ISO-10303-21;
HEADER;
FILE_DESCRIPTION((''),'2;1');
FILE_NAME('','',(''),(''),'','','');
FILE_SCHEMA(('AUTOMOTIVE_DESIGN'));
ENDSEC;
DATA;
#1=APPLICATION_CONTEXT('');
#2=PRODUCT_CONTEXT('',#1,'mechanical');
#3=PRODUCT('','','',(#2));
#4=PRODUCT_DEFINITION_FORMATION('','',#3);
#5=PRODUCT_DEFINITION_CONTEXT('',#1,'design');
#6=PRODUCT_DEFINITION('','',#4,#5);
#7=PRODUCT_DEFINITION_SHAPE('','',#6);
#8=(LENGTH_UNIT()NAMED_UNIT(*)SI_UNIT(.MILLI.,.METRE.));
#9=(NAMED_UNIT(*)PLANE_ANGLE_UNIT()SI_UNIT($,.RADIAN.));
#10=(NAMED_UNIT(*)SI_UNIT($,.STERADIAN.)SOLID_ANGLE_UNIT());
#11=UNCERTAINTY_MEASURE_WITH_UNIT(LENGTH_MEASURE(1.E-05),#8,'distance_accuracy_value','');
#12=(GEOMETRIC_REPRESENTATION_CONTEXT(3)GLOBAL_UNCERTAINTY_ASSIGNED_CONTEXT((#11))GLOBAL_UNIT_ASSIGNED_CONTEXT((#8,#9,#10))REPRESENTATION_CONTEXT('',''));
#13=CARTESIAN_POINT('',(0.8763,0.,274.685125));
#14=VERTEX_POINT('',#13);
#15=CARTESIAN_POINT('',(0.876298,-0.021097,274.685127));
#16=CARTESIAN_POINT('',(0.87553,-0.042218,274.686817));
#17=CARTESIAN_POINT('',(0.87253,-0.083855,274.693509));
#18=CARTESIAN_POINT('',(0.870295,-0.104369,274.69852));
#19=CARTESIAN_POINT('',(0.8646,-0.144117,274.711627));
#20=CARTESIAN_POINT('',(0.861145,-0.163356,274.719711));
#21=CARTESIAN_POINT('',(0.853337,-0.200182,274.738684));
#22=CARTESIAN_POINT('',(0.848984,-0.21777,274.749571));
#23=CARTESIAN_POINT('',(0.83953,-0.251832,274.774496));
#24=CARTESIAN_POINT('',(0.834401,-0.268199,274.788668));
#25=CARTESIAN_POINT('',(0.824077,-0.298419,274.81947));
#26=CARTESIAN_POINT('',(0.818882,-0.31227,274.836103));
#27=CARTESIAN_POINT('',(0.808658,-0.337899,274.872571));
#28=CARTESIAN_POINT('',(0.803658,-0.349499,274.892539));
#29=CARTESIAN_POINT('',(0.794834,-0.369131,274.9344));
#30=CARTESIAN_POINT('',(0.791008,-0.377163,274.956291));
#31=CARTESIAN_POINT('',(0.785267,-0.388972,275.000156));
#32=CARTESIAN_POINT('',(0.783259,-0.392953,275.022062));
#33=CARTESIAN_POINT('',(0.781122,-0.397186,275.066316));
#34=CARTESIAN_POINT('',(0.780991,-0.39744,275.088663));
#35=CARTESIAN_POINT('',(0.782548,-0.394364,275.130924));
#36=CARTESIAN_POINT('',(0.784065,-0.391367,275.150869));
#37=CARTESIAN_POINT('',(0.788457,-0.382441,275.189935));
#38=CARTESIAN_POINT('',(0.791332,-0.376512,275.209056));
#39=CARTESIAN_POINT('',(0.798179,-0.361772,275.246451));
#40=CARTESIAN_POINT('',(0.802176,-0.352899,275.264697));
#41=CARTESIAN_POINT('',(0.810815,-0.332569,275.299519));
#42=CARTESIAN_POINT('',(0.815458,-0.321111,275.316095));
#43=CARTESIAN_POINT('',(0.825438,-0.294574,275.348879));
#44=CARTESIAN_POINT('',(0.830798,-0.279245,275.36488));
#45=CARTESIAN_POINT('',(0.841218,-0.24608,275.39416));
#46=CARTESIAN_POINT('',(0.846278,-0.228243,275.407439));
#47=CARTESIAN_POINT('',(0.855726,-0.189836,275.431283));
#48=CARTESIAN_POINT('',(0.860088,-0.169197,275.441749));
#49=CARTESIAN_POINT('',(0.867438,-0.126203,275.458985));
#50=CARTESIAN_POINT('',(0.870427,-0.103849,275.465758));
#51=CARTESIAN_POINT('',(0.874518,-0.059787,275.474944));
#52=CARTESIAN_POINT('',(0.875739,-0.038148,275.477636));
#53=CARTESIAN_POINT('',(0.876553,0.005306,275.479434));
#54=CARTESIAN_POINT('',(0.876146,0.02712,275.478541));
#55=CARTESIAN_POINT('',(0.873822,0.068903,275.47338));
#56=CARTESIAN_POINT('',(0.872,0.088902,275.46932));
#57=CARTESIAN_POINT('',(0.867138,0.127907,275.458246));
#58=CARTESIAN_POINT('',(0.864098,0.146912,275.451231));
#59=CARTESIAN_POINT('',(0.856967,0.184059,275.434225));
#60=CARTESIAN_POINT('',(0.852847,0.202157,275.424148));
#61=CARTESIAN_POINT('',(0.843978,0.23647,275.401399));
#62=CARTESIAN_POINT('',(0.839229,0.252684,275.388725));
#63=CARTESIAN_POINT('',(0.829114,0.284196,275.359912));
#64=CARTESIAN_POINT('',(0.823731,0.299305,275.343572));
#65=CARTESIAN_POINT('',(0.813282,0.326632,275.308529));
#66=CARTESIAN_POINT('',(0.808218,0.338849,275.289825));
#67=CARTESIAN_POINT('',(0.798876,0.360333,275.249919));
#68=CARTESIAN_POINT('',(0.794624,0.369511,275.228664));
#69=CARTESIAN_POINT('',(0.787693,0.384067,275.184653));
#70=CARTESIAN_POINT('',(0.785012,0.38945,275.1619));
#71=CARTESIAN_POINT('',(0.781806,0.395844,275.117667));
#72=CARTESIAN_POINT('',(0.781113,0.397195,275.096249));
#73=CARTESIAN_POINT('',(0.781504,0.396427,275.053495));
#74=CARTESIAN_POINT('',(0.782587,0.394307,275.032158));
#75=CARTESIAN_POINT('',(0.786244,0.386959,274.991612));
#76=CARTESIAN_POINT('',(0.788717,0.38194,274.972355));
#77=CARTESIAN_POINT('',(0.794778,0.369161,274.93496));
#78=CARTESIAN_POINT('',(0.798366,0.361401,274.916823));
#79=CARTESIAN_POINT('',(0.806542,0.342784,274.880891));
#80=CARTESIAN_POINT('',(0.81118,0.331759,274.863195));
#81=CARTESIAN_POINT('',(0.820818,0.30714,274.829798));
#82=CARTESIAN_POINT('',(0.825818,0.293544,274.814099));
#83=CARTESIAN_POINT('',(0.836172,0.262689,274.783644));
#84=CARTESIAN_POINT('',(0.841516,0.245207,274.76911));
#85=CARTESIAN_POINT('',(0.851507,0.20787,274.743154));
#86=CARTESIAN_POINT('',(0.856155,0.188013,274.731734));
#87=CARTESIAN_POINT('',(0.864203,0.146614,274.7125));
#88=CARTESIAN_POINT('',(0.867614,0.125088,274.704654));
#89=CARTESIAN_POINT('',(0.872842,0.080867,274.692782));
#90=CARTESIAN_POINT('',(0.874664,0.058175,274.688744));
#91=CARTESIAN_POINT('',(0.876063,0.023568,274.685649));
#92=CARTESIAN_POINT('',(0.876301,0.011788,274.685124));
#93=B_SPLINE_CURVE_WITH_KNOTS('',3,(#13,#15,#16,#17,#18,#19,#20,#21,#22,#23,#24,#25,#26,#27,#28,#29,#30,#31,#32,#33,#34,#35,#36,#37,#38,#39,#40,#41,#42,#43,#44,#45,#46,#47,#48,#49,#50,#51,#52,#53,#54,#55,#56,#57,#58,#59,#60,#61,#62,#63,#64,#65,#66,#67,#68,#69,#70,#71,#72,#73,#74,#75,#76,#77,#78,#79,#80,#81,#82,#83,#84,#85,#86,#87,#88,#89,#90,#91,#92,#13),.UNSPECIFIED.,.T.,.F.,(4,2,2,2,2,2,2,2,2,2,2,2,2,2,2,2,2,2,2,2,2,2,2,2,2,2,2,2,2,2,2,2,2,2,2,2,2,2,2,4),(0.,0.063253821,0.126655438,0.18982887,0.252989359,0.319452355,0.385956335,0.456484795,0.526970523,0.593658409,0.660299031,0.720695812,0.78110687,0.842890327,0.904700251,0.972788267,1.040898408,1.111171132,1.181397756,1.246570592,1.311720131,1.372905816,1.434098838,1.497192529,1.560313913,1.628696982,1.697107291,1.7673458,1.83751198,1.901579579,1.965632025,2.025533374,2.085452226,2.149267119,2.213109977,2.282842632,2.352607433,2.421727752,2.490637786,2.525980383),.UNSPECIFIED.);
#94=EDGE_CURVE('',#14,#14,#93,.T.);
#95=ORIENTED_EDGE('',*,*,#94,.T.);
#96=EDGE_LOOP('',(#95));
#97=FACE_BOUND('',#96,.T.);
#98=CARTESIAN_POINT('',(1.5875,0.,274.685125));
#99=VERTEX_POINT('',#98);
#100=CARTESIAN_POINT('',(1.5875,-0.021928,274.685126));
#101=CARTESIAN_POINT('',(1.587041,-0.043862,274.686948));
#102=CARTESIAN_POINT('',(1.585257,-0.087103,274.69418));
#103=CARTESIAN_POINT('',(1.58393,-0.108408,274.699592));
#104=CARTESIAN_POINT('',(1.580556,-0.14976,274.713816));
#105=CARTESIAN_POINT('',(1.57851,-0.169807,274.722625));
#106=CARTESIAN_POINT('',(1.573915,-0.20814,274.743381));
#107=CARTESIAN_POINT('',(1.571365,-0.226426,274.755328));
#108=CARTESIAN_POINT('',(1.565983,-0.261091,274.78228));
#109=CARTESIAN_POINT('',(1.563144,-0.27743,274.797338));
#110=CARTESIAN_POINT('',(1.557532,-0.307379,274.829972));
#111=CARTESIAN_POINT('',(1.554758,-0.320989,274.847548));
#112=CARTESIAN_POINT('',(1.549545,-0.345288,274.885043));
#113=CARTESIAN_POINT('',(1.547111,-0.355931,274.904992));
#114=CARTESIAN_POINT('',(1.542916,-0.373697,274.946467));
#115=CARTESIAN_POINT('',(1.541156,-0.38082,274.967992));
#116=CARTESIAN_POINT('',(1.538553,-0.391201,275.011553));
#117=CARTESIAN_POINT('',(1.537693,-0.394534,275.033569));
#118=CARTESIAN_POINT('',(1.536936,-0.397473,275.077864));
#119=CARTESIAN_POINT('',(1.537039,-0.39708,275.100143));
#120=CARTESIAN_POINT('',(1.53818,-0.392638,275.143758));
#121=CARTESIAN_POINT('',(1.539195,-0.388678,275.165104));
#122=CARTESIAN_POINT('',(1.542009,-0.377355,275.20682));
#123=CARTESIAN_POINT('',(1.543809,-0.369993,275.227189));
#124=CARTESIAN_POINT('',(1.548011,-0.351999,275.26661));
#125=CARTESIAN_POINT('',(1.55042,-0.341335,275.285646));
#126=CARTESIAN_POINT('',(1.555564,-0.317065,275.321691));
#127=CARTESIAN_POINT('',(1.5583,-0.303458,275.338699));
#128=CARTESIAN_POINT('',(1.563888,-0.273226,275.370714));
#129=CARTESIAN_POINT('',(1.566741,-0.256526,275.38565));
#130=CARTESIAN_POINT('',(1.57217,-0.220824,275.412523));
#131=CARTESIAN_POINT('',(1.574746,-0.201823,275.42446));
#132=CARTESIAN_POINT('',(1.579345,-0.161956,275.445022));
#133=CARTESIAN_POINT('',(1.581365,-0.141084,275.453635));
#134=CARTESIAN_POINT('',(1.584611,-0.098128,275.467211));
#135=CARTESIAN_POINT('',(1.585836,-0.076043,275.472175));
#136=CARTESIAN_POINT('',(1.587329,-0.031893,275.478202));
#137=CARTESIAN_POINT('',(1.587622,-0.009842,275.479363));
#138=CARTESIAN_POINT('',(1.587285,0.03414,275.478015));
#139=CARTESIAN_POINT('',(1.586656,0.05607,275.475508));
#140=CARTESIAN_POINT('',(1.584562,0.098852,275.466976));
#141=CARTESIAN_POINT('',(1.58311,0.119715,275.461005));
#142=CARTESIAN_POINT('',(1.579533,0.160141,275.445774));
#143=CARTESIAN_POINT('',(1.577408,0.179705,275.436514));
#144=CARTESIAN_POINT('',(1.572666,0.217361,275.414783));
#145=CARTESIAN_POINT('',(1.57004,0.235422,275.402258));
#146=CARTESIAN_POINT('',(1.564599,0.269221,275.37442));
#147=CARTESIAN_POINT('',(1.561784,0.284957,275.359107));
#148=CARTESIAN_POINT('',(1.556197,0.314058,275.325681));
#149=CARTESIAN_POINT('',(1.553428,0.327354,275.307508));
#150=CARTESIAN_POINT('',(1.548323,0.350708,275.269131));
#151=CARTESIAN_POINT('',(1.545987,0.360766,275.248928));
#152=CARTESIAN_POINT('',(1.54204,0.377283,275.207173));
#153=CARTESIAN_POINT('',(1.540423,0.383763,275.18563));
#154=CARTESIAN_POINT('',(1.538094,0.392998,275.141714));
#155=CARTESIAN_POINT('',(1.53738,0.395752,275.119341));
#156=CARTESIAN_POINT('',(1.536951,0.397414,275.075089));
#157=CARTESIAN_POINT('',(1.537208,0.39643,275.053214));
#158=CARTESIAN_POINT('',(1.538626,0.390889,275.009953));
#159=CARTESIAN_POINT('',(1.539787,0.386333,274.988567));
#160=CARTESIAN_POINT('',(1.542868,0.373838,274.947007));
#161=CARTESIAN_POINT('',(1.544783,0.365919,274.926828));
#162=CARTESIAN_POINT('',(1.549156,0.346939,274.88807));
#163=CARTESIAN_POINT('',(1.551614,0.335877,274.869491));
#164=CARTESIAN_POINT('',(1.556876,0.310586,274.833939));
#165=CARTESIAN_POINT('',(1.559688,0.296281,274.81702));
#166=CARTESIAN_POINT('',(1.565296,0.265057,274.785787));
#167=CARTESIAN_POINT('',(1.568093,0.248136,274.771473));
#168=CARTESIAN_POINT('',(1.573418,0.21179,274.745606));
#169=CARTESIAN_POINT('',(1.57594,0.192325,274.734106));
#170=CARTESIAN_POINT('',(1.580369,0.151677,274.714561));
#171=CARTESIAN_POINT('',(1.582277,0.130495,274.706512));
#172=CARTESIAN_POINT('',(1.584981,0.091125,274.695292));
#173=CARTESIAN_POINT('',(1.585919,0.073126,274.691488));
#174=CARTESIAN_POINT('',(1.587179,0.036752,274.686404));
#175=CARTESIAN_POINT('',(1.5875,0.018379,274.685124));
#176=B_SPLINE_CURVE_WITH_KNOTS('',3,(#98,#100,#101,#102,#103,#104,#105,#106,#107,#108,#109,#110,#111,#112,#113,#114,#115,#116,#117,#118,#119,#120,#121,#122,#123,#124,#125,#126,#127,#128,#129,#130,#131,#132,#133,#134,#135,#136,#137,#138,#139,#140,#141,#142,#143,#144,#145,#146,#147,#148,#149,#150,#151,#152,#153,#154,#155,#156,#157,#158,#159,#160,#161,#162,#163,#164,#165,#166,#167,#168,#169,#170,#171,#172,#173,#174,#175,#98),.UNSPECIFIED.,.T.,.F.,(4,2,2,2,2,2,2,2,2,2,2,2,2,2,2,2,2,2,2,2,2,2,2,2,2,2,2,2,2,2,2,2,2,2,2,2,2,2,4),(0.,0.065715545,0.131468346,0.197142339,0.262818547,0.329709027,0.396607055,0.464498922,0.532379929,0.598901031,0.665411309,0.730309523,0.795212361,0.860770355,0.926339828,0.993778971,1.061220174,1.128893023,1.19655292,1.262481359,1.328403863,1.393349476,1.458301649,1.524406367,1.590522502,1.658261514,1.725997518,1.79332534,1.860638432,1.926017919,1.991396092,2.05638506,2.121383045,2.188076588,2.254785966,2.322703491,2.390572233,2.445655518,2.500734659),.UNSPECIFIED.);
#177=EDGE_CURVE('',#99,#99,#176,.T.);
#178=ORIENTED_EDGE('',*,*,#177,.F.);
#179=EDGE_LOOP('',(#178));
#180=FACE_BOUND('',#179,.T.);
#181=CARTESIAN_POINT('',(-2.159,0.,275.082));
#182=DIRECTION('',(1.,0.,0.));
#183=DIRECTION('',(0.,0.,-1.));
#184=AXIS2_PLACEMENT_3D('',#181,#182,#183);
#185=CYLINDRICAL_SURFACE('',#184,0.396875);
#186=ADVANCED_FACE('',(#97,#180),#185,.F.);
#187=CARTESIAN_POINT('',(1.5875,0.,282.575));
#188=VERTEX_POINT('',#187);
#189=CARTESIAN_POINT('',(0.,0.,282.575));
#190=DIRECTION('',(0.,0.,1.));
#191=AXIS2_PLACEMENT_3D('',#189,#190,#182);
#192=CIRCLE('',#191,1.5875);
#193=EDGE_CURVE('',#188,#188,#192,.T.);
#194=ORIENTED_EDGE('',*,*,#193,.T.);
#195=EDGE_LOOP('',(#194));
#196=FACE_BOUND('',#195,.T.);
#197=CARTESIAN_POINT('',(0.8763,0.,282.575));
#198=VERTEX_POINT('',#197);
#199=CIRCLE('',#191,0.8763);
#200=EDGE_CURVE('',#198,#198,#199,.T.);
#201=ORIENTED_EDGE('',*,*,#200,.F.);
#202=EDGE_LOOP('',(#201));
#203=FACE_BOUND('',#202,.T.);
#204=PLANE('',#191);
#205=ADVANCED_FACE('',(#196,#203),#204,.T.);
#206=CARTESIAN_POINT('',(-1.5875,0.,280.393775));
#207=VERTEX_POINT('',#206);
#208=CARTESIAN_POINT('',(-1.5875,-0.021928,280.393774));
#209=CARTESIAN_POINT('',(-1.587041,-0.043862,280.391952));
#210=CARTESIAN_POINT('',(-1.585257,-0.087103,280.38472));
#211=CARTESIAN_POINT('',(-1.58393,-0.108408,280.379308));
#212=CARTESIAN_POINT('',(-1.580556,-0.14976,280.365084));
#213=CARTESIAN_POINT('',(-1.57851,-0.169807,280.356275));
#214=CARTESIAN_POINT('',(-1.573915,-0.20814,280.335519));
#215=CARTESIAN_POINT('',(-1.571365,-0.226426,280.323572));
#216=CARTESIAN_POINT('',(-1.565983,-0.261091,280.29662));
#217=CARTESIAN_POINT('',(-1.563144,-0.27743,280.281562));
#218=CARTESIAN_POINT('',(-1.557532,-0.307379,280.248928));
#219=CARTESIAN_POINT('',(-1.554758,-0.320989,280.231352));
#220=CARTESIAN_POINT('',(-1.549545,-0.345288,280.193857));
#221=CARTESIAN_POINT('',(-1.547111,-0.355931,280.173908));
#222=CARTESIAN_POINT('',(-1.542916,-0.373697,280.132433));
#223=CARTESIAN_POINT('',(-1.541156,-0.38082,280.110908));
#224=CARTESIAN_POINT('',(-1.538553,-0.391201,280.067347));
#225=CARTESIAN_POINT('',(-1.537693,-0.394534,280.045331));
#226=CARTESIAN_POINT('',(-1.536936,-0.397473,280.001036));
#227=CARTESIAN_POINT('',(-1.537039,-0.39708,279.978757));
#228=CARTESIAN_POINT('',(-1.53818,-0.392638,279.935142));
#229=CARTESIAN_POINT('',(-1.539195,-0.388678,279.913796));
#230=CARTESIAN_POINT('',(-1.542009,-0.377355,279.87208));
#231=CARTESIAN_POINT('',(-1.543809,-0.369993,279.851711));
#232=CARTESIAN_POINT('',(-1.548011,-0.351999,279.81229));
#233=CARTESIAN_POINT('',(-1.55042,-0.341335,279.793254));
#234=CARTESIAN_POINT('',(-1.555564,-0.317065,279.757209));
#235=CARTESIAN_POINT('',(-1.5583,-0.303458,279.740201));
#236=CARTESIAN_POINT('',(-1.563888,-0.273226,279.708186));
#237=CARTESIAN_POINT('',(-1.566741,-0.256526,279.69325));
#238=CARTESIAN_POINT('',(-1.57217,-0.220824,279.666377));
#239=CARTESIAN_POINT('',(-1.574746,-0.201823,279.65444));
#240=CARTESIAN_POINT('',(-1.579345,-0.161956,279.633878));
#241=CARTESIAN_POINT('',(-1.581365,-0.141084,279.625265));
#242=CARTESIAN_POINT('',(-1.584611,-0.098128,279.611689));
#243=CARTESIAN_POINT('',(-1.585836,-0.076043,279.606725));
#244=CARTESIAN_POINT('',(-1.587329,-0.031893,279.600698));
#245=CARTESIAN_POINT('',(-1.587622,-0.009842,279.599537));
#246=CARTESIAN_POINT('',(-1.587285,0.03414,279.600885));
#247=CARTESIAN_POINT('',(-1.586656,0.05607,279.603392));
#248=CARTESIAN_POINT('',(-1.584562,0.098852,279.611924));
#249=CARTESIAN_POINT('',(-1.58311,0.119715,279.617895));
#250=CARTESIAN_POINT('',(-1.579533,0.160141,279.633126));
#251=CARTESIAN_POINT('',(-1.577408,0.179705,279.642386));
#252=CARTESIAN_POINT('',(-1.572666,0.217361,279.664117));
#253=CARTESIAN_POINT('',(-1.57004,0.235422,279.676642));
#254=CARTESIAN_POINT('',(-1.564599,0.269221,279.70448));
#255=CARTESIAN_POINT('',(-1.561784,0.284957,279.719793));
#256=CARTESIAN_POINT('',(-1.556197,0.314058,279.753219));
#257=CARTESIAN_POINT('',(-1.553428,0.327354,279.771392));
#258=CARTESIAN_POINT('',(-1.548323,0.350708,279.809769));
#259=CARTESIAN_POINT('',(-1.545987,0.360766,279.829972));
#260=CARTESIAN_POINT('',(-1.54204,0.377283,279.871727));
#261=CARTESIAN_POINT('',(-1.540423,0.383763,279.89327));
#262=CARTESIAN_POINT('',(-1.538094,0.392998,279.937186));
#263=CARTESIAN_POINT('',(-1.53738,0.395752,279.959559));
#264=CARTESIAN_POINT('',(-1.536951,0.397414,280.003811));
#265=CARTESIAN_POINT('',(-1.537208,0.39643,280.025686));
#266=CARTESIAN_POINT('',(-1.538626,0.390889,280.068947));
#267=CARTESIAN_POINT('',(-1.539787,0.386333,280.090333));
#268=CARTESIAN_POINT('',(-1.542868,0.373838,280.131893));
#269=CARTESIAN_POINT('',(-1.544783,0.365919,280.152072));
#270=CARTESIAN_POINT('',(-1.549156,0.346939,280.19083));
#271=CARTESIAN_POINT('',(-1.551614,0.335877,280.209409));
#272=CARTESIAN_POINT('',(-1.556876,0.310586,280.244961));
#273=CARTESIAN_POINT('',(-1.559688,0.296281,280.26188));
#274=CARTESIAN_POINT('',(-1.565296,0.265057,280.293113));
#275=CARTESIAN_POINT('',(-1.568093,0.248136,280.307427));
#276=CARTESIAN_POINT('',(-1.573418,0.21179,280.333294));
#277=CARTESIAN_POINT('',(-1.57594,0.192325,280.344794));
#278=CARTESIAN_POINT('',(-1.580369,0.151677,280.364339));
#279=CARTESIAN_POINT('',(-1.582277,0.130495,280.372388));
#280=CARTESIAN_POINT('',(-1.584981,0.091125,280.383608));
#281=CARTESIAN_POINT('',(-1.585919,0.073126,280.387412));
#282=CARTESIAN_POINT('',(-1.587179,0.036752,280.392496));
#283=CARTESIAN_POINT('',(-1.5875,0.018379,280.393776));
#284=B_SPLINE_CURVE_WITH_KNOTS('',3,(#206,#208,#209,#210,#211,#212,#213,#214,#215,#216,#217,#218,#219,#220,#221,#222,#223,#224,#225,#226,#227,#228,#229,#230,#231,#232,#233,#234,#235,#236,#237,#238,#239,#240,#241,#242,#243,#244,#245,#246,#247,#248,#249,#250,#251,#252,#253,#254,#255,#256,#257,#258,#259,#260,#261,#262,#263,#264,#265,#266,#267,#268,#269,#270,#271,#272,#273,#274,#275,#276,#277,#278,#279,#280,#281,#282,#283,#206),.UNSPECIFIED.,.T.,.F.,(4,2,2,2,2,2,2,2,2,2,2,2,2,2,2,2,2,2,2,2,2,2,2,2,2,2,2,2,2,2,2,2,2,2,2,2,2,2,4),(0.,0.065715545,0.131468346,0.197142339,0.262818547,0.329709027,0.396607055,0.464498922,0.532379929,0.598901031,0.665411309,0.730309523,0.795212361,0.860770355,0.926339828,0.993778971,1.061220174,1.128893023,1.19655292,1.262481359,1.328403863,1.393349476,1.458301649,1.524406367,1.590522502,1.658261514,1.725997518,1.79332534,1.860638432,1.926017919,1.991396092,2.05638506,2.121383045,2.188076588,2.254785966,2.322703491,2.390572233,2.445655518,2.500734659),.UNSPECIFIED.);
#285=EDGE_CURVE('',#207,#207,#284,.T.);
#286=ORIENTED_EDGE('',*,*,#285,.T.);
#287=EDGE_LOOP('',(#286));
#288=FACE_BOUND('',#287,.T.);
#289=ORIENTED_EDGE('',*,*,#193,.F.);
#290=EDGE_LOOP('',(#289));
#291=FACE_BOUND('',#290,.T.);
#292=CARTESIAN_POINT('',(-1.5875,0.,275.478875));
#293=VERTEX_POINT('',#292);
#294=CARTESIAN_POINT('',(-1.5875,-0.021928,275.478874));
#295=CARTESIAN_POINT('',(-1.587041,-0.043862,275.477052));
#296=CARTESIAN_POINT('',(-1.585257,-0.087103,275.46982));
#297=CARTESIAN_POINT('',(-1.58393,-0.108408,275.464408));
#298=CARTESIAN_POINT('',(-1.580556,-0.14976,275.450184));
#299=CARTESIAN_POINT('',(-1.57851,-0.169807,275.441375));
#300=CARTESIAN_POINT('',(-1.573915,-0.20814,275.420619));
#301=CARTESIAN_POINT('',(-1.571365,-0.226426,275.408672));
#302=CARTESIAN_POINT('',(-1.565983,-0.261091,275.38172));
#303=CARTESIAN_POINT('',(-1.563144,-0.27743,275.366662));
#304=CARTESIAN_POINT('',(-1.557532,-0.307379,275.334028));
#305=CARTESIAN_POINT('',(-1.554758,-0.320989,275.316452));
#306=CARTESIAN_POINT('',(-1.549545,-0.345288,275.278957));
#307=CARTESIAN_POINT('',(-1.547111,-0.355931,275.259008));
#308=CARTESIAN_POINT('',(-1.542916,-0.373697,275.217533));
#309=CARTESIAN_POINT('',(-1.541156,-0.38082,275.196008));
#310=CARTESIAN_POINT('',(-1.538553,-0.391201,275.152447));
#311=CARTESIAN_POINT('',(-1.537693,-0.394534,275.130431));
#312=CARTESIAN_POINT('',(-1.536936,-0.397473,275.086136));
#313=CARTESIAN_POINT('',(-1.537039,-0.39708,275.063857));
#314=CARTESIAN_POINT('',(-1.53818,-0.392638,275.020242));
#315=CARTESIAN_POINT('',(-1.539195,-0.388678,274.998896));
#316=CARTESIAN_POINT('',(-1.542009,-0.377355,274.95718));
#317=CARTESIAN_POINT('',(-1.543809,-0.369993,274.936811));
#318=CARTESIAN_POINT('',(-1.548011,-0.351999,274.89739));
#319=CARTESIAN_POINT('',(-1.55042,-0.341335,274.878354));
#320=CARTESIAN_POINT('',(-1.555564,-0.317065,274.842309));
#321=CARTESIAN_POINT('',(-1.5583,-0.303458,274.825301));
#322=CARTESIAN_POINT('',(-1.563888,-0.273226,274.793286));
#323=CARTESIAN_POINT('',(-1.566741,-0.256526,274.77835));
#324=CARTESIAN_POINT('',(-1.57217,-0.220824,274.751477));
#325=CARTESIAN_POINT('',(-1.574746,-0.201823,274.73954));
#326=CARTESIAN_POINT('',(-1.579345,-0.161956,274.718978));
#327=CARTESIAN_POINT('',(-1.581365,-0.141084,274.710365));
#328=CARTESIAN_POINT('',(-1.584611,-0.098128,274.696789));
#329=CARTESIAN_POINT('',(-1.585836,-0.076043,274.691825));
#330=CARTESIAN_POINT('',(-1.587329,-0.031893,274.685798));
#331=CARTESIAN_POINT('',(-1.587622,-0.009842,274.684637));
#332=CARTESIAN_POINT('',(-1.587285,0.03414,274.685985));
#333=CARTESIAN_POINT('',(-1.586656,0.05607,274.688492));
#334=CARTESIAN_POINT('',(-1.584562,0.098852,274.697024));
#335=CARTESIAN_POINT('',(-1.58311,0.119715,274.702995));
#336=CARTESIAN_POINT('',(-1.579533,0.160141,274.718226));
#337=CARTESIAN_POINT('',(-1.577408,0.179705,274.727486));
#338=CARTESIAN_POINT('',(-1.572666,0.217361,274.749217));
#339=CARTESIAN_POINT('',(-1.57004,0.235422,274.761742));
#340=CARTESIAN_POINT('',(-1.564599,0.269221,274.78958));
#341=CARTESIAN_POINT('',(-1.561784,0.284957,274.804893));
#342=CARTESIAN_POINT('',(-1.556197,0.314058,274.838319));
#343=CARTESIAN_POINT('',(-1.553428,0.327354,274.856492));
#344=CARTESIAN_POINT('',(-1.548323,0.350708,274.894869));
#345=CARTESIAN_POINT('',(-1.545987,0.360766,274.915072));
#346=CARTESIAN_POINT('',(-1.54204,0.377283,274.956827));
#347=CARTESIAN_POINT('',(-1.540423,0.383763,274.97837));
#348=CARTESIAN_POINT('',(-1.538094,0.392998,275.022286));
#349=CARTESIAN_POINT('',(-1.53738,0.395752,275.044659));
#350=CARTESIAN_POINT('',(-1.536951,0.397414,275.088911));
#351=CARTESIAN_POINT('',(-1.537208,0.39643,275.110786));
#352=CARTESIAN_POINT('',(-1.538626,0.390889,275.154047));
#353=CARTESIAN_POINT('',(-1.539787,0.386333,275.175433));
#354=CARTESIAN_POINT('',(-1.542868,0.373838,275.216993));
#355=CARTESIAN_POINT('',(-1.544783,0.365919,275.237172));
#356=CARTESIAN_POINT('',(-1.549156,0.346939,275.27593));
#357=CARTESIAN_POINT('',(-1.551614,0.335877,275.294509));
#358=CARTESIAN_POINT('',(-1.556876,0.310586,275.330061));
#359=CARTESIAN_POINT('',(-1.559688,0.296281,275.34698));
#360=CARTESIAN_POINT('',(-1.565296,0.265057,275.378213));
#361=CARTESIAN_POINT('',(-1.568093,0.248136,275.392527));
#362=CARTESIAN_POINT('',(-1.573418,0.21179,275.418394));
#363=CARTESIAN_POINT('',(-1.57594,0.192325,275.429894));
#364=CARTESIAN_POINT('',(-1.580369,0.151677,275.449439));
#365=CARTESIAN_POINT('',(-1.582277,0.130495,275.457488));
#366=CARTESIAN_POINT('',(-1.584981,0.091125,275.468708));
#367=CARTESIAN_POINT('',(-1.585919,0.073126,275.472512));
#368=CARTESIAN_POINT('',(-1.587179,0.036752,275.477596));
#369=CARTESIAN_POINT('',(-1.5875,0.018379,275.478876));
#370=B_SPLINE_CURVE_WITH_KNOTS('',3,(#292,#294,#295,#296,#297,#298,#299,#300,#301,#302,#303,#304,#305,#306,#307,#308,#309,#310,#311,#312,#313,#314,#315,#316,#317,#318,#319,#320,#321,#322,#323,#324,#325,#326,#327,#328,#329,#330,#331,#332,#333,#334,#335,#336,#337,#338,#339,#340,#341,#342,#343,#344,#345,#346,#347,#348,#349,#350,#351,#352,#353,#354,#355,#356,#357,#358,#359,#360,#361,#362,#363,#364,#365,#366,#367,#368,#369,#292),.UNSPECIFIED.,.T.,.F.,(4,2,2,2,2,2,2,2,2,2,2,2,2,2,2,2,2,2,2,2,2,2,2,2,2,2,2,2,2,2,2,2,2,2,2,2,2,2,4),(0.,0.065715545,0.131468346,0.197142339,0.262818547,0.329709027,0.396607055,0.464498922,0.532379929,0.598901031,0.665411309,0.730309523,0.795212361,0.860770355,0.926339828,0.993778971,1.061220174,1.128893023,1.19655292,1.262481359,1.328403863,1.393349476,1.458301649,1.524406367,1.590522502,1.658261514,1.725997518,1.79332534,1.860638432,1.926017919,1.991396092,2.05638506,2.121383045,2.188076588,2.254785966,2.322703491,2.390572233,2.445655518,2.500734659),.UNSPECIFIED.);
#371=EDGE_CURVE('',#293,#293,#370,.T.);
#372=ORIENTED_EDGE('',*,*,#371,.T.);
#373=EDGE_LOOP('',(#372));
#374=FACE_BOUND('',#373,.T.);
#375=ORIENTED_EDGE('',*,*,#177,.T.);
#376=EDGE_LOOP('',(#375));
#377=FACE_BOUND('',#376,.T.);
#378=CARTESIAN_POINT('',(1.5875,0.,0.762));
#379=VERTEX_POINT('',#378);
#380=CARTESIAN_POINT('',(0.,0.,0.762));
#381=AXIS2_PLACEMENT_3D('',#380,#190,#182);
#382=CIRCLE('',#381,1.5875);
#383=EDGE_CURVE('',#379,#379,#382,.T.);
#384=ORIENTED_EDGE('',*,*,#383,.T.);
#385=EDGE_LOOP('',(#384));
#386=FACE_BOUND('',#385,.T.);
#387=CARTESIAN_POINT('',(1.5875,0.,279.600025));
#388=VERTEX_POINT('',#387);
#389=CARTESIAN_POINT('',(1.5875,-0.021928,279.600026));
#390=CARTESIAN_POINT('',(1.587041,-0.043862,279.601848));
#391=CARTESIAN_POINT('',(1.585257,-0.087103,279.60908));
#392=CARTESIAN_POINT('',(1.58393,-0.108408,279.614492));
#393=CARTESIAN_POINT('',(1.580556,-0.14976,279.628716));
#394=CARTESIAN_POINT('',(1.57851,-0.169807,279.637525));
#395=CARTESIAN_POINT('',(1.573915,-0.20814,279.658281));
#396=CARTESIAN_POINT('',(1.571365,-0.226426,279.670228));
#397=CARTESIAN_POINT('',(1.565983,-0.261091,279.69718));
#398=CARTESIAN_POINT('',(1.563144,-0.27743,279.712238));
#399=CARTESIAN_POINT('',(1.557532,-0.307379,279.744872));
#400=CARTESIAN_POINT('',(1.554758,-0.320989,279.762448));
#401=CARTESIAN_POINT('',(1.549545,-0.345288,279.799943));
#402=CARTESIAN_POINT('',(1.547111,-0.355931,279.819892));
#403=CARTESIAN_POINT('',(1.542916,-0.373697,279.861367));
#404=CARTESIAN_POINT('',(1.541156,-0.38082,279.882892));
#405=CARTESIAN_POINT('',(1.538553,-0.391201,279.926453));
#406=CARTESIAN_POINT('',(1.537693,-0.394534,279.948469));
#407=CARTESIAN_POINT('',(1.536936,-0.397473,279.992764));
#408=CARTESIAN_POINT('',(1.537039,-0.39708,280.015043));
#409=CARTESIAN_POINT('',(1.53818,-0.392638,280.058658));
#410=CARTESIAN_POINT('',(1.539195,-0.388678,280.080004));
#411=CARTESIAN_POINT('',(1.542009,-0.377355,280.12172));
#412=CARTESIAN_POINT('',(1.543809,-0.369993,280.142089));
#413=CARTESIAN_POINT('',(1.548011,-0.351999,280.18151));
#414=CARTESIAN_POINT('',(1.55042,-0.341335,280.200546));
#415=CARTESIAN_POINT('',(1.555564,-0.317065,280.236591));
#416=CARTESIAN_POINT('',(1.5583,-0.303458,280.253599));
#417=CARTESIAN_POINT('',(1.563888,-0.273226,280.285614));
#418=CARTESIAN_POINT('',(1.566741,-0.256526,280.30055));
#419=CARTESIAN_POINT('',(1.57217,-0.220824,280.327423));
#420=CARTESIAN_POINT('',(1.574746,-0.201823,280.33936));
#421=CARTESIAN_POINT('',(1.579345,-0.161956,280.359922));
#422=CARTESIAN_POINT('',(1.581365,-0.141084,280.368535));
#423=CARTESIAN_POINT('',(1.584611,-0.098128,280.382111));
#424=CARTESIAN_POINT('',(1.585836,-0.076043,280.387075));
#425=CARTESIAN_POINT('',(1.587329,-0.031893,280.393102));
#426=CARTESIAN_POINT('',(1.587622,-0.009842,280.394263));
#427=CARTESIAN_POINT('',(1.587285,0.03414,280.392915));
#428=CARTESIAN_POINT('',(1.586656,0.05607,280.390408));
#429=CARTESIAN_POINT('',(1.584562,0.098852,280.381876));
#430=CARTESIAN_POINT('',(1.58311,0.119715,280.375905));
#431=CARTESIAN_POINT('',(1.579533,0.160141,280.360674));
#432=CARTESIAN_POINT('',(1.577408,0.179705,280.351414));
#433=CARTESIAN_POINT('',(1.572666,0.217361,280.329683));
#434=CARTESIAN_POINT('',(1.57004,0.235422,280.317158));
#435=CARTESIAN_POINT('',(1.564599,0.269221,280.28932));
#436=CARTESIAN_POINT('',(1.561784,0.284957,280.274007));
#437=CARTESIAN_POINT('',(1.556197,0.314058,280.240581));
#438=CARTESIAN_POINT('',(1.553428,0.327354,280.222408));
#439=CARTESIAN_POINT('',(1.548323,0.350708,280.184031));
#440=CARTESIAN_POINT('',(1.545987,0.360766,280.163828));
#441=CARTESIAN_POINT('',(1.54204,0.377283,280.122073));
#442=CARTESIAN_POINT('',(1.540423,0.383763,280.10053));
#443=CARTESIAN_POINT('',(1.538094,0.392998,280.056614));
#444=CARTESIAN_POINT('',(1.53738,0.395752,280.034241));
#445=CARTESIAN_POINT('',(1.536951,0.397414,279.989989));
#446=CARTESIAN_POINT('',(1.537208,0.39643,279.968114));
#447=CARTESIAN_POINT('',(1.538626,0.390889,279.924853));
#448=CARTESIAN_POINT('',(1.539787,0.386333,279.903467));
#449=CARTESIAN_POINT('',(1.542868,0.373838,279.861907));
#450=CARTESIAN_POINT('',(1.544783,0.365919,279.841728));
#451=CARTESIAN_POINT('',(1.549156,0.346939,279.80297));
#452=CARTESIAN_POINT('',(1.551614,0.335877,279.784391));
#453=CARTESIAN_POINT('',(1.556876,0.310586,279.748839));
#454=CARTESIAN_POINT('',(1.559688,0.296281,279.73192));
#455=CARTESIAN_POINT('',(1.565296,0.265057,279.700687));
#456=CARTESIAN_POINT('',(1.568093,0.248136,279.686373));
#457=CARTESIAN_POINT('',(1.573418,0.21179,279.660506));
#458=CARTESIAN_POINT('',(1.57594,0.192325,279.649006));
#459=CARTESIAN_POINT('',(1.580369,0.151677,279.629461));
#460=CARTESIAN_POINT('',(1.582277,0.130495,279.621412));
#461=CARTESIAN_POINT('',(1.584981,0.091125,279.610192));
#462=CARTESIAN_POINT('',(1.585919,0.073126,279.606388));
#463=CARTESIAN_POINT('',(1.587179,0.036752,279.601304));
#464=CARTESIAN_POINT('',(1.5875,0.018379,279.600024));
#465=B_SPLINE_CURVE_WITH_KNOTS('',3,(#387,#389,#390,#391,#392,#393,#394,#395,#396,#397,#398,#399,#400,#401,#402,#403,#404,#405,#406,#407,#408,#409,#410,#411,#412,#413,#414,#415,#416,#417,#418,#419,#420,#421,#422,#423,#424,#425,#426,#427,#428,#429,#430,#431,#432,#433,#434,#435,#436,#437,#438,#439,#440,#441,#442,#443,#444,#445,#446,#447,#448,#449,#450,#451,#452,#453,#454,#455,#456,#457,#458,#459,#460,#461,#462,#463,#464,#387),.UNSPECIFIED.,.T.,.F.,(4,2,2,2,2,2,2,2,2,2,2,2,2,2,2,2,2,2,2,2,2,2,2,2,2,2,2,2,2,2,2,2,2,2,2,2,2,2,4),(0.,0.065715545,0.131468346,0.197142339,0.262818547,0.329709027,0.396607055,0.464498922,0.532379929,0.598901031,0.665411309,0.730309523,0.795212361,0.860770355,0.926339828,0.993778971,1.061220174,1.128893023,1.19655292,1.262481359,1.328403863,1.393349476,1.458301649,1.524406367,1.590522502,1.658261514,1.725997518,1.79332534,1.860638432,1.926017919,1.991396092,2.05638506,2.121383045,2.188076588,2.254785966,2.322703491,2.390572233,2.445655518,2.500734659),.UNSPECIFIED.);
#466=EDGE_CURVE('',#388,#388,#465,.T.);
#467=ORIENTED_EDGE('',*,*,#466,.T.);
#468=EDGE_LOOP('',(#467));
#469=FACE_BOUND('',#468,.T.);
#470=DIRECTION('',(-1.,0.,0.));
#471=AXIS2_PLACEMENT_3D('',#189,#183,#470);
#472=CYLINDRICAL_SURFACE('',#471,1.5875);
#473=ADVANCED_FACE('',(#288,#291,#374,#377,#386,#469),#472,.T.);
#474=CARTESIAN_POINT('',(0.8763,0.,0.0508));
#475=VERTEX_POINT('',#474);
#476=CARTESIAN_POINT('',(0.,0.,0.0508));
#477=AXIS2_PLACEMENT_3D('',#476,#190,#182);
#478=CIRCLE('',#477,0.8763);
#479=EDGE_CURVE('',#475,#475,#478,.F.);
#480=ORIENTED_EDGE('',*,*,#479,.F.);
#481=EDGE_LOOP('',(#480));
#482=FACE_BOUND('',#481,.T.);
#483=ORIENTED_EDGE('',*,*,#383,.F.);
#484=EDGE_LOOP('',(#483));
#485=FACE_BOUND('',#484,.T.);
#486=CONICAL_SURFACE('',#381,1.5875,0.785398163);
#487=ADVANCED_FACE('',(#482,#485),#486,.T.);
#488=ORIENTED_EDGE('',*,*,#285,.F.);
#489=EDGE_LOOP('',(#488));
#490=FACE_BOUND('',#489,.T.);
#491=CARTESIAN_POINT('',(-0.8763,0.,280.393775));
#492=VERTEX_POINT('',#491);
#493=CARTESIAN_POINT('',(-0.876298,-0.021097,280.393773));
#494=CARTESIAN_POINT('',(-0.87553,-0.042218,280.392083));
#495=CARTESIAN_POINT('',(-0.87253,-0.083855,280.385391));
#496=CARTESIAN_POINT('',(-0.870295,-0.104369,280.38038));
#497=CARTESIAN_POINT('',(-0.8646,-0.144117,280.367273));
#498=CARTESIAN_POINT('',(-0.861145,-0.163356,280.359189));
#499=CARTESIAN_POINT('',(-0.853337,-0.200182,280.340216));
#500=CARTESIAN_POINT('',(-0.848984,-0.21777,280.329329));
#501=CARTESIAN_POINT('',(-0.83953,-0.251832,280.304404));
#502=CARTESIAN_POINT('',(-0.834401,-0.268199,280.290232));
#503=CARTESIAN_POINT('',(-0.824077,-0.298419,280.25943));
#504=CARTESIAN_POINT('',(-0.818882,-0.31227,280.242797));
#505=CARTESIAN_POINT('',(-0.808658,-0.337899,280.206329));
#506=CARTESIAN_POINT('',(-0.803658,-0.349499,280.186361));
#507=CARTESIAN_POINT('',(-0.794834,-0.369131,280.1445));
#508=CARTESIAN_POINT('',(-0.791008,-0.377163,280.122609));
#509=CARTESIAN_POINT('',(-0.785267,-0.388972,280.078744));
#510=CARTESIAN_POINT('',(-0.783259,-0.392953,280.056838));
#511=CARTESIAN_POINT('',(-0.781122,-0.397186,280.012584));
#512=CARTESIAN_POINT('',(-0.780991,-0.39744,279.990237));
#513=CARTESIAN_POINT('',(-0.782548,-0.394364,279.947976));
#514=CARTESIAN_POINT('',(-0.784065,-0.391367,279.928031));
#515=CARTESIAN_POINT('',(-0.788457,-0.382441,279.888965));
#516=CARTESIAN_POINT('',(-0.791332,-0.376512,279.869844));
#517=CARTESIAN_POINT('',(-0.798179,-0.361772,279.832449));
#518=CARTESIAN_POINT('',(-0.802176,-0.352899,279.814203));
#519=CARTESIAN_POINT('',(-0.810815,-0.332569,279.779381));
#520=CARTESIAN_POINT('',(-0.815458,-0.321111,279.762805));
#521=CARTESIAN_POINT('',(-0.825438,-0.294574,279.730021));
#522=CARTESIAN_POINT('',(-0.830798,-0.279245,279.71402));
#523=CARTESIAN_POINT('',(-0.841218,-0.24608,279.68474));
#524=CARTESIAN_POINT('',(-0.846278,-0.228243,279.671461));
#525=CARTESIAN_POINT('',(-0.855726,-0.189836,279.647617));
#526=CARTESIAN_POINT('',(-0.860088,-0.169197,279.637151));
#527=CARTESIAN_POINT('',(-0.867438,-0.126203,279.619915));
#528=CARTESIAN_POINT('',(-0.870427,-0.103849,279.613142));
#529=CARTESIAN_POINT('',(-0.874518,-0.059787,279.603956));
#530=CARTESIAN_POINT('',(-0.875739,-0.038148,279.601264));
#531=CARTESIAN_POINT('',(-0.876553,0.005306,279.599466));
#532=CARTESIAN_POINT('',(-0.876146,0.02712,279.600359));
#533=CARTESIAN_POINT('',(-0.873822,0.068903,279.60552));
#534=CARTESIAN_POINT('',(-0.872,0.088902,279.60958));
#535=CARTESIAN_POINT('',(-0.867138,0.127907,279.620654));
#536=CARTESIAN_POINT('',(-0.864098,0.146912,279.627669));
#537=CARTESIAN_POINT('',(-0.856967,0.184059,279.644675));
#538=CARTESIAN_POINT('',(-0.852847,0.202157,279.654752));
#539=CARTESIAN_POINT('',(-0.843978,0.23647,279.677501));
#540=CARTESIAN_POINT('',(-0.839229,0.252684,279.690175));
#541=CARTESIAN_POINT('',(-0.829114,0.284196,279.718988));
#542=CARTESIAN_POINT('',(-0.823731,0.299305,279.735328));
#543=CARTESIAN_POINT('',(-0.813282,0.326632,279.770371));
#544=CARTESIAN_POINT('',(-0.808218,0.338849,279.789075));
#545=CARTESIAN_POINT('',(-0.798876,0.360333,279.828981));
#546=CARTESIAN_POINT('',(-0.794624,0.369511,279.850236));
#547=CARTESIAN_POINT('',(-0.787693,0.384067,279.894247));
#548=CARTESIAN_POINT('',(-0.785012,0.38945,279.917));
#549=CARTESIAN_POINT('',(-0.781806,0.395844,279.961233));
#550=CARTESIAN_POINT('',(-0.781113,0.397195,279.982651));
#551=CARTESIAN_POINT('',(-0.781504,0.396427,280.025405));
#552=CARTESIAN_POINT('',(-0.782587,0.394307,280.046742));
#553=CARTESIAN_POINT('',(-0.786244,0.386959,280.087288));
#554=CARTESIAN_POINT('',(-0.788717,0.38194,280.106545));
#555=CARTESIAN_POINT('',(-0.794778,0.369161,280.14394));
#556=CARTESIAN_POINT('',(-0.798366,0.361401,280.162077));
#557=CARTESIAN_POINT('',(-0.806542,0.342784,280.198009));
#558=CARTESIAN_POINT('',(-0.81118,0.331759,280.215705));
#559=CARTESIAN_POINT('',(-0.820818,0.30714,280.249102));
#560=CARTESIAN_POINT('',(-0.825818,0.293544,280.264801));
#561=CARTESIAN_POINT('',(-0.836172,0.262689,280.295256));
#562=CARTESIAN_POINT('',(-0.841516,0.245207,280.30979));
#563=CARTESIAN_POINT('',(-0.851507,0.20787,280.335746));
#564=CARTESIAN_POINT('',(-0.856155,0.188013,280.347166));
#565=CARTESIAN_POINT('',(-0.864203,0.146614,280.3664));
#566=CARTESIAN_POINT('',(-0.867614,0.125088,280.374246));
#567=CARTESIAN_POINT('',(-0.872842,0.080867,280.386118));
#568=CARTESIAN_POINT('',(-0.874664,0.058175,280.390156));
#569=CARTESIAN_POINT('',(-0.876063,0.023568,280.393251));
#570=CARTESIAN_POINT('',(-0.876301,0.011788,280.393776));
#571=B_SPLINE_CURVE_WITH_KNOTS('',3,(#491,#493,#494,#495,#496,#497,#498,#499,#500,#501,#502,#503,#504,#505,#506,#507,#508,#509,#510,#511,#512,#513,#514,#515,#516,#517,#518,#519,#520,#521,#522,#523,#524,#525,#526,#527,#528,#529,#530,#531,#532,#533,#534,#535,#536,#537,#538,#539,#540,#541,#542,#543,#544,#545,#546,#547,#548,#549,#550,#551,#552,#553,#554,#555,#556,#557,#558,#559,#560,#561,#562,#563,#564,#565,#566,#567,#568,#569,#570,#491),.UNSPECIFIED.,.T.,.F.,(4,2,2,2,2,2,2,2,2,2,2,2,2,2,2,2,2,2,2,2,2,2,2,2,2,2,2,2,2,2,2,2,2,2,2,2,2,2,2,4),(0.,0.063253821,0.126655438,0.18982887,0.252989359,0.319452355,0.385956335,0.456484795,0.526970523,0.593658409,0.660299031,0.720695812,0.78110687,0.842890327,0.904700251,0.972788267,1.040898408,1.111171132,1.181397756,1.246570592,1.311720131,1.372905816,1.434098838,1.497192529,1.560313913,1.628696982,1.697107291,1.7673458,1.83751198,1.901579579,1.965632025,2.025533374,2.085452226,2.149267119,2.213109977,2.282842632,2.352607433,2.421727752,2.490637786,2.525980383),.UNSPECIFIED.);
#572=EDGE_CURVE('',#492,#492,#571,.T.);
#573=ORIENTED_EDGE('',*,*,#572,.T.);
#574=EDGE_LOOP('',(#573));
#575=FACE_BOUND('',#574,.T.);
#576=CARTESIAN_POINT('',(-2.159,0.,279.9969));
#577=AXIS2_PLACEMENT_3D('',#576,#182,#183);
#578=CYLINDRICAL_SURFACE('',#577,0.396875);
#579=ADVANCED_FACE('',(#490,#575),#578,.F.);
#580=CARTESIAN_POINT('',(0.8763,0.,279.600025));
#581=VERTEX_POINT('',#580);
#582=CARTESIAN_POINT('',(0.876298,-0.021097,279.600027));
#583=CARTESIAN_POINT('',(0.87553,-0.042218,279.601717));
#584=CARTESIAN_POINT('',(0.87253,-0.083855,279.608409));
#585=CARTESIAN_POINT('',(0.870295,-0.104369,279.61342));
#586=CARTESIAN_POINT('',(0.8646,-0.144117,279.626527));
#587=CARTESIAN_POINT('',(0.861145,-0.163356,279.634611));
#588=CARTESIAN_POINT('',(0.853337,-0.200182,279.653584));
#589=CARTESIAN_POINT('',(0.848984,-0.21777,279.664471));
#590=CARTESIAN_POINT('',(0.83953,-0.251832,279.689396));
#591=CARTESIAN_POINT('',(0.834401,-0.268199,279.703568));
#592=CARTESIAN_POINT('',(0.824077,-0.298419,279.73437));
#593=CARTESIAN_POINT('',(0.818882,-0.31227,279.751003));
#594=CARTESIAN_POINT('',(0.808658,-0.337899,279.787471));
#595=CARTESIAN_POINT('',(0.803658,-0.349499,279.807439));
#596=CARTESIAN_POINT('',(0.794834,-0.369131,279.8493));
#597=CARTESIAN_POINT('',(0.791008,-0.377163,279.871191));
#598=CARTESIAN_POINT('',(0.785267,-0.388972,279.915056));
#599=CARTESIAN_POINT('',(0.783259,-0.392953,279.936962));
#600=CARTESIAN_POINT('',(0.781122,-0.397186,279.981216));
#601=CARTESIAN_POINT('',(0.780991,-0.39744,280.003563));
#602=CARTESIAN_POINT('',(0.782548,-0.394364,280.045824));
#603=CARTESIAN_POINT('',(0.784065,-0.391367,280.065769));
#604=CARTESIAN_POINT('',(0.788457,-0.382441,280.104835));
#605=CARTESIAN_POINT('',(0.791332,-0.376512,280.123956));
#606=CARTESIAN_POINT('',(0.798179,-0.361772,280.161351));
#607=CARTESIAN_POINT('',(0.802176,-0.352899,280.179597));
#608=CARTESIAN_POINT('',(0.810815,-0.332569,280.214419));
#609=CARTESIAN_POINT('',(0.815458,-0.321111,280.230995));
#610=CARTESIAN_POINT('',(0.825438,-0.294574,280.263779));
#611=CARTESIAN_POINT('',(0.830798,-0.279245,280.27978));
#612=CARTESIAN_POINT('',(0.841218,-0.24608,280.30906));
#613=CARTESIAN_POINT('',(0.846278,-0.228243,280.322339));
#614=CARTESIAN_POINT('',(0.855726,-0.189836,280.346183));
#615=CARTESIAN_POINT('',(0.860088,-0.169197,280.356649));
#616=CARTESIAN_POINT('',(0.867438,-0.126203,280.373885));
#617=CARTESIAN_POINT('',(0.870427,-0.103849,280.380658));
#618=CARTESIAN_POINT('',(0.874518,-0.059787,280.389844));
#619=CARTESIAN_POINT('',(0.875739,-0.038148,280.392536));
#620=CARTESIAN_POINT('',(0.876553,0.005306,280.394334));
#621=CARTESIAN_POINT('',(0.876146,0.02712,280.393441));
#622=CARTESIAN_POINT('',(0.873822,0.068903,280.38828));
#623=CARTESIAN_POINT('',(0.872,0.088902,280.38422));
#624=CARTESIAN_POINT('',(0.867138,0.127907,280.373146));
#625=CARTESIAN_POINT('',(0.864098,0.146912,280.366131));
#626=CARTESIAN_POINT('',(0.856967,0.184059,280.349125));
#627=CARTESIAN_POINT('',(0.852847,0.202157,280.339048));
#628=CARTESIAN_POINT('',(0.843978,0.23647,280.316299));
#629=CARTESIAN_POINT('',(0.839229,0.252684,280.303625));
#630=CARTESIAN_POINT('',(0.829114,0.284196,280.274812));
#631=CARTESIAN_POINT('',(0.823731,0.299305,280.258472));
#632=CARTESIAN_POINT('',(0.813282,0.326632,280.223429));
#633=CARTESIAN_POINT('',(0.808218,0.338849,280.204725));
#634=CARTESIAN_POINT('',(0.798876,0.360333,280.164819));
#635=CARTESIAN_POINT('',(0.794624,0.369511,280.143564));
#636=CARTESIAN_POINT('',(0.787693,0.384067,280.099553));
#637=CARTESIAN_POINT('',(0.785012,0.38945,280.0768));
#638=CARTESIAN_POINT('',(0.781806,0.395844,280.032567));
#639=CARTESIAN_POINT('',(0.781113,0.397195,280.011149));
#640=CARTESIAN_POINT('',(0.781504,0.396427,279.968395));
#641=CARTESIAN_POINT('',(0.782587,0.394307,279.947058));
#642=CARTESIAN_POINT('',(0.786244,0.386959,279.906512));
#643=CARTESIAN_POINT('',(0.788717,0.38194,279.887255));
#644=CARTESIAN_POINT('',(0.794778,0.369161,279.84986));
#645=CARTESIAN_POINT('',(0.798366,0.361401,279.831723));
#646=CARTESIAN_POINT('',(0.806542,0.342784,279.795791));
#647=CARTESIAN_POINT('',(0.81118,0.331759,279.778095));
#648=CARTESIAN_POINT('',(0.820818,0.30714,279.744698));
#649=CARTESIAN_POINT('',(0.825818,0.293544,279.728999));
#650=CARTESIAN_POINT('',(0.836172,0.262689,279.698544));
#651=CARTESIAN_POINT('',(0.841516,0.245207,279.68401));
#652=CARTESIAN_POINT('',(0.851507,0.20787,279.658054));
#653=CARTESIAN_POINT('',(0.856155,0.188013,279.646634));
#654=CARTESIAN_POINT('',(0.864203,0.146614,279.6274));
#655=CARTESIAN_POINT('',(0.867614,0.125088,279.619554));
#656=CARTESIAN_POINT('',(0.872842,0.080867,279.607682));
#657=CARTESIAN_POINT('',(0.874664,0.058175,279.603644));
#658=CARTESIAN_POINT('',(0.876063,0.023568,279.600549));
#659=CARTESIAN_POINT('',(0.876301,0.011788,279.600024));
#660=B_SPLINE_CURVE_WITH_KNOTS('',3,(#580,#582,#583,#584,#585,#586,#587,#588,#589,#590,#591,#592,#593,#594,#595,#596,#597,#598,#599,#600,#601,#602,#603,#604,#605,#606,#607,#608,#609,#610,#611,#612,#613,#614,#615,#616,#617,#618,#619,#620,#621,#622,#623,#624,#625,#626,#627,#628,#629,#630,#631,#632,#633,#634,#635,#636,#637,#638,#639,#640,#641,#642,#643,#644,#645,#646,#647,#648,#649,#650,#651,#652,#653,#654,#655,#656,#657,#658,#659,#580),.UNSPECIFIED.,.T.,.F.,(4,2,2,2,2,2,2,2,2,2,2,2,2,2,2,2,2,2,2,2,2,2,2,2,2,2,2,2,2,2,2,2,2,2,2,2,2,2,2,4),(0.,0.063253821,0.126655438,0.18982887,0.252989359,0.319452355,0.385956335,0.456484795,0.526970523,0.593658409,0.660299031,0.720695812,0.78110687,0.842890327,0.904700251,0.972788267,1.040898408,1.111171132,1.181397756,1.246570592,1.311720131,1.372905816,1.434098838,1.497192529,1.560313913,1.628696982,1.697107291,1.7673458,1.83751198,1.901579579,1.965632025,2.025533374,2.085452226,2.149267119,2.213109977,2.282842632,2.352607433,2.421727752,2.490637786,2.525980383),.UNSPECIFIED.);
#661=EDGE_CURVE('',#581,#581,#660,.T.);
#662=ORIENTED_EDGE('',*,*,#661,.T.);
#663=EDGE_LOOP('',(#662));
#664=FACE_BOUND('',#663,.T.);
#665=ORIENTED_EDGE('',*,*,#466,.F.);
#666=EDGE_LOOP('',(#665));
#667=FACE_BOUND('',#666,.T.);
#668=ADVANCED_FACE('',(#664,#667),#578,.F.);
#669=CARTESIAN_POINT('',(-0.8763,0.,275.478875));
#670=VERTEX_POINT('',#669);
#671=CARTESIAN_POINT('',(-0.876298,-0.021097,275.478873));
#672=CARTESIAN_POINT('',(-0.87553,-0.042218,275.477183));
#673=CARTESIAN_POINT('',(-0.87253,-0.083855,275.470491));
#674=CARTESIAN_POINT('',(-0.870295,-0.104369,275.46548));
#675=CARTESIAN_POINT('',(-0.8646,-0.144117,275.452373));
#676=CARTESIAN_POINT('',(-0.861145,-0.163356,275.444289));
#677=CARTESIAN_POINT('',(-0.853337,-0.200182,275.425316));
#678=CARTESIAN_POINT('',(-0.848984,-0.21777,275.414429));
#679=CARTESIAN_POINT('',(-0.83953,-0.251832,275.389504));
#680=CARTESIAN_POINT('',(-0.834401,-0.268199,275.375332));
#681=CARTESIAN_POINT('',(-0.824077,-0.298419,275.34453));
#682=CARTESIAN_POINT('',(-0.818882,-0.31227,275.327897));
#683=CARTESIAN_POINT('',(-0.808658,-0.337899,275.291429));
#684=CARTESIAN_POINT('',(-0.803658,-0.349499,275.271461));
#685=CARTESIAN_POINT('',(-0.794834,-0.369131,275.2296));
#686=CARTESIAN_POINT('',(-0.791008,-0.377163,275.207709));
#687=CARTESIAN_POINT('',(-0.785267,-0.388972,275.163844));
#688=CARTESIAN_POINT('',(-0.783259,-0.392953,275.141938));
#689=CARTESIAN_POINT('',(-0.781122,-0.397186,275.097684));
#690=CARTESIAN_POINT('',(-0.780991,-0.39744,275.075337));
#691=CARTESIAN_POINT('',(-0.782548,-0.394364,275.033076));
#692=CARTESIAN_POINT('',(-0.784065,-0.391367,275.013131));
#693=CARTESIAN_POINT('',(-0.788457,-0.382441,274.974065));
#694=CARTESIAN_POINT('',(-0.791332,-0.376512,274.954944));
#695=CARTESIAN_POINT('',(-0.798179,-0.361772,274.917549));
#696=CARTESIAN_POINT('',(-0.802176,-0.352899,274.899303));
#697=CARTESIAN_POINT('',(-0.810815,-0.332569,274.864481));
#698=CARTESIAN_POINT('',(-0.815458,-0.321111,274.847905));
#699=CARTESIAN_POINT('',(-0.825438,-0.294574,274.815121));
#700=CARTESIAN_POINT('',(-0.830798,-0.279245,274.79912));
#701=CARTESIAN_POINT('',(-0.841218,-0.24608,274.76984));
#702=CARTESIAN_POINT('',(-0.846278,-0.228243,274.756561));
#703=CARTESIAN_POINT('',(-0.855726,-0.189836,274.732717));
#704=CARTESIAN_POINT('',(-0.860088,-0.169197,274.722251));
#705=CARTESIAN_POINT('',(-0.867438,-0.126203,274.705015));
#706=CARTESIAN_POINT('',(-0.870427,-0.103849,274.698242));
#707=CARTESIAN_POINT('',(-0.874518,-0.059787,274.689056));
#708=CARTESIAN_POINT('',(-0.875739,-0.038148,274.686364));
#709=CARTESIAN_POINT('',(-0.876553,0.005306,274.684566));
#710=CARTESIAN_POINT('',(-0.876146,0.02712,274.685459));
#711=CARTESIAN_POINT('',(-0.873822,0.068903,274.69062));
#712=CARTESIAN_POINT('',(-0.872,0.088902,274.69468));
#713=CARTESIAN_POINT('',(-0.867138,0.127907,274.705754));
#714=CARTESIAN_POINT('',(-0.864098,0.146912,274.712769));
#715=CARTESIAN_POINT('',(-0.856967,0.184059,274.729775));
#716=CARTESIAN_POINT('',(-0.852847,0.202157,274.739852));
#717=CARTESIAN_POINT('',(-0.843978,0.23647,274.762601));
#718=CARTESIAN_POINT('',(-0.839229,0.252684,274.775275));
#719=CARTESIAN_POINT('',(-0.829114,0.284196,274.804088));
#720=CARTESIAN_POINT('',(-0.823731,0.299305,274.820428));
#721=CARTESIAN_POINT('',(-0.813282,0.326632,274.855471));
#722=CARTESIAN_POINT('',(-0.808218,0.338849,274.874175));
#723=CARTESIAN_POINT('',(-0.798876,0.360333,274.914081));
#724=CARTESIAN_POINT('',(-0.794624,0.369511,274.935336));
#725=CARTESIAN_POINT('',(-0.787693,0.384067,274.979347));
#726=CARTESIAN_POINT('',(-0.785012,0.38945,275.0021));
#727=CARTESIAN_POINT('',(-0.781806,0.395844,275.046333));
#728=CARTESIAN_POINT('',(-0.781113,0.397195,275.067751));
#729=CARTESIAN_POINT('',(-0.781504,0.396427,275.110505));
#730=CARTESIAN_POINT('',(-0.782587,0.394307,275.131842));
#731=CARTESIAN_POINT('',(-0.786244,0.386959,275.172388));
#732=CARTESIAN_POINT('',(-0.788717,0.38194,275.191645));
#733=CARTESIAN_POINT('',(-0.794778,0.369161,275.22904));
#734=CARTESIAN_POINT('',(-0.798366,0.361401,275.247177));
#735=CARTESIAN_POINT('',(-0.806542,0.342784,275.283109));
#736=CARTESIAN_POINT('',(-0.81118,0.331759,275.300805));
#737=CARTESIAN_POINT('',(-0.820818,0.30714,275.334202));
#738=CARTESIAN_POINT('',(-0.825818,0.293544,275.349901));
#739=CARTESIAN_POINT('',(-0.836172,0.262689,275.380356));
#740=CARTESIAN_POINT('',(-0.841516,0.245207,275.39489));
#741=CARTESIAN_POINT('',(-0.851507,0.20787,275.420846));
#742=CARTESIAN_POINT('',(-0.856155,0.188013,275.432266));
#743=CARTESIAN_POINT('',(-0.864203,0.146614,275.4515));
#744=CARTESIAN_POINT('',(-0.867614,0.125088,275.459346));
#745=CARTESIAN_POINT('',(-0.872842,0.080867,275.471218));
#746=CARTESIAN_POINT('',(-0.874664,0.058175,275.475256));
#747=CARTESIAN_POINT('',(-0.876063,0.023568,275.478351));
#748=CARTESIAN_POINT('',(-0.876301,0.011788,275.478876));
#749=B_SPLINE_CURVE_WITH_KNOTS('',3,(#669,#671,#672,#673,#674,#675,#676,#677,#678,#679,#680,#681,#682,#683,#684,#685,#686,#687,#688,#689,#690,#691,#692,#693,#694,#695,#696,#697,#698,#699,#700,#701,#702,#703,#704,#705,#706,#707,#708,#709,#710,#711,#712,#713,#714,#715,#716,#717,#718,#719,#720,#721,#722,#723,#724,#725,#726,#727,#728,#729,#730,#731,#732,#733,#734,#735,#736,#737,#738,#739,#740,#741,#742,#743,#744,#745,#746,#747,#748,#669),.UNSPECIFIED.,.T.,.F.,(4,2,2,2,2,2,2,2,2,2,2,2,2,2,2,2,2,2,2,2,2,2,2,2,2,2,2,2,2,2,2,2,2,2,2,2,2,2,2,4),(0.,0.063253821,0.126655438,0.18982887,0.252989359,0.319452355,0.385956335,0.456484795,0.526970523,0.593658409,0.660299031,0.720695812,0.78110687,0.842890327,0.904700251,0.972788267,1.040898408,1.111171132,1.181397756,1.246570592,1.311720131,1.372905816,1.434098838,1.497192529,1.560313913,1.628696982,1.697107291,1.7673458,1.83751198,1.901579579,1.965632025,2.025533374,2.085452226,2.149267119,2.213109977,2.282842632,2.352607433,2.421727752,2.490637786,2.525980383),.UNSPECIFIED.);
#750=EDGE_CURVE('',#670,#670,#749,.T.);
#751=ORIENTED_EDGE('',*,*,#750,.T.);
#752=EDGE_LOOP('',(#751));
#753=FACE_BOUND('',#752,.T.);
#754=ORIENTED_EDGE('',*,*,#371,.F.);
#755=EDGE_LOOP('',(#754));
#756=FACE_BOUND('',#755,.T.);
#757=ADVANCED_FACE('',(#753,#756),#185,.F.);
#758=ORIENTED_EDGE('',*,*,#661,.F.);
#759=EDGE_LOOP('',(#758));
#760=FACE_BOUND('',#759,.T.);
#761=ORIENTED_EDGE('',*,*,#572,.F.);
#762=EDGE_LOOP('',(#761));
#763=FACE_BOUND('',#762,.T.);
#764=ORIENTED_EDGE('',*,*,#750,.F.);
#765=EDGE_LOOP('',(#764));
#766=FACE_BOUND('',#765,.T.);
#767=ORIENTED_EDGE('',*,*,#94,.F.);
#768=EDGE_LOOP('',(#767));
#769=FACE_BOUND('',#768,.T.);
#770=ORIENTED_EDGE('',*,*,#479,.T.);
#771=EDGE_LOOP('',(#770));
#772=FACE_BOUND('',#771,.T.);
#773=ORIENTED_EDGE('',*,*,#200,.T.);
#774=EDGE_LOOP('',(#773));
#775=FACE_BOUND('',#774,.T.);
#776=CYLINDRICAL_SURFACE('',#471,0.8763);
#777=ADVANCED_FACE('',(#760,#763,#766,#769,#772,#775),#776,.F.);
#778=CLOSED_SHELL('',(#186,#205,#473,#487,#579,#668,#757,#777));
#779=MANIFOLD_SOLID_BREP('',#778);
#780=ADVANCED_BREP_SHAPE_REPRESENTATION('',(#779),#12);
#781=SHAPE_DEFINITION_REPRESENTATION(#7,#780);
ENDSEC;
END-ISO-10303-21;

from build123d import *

# Parameters (mm, degrees)
SKETCH1_R           = 1.5875
SKETCH1_R_2         = 0.8763
BOSS_EXTRUDE1_DEPTH = 282.575
SKETCH3_R           = 0.396875
CUT_EXTRUDE1_DEPTH  = 2.159
CHAMFER1_SIZE       = 0.762


with BuildPart() as part:
    # Sketch1 → Boss-Extrude1 (new body)
    with BuildSketch(Plane.XY):
        Circle(SKETCH1_R)
        Circle(SKETCH1_R_2, mode=Mode.SUBTRACT)
    extrude(amount=BOSS_EXTRUDE1_DEPTH)

    # Sketch3 → Cut-Extrude1 (cut, symmetric)
    with BuildSketch(Plane(origin=(0, 0, 0), x_dir=(0, 0, -1), z_dir=(1, 0, 0))):
        with Locations((-279.9969, 0)):
            Circle(SKETCH3_R)
        with Locations((-275.082, 0)):
            Circle(SKETCH3_R)
    extrude(amount=CUT_EXTRUDE1_DEPTH, both=True, mode=Mode.SUBTRACT)

    # Chamfer1
    # the kernel refuses this chamfer: 0.762 mm, written as the material it takes off along each edge
    with BuildSketch(Plane(origin=(0, 0, 0), x_dir=(1, 0, 0), z_dir=(0, -1, 0))) as chamfer1_piece_1:
        Polygon((1.5875, CHAMFER1_SIZE), (1.5875 - CHAMFER1_SIZE, 0), (1.5875, 0), align=None)
    revolve(axis=Axis((0, 0, 0), (0, 0, 1)), mode=Mode.SUBTRACT)


solid = part.part
